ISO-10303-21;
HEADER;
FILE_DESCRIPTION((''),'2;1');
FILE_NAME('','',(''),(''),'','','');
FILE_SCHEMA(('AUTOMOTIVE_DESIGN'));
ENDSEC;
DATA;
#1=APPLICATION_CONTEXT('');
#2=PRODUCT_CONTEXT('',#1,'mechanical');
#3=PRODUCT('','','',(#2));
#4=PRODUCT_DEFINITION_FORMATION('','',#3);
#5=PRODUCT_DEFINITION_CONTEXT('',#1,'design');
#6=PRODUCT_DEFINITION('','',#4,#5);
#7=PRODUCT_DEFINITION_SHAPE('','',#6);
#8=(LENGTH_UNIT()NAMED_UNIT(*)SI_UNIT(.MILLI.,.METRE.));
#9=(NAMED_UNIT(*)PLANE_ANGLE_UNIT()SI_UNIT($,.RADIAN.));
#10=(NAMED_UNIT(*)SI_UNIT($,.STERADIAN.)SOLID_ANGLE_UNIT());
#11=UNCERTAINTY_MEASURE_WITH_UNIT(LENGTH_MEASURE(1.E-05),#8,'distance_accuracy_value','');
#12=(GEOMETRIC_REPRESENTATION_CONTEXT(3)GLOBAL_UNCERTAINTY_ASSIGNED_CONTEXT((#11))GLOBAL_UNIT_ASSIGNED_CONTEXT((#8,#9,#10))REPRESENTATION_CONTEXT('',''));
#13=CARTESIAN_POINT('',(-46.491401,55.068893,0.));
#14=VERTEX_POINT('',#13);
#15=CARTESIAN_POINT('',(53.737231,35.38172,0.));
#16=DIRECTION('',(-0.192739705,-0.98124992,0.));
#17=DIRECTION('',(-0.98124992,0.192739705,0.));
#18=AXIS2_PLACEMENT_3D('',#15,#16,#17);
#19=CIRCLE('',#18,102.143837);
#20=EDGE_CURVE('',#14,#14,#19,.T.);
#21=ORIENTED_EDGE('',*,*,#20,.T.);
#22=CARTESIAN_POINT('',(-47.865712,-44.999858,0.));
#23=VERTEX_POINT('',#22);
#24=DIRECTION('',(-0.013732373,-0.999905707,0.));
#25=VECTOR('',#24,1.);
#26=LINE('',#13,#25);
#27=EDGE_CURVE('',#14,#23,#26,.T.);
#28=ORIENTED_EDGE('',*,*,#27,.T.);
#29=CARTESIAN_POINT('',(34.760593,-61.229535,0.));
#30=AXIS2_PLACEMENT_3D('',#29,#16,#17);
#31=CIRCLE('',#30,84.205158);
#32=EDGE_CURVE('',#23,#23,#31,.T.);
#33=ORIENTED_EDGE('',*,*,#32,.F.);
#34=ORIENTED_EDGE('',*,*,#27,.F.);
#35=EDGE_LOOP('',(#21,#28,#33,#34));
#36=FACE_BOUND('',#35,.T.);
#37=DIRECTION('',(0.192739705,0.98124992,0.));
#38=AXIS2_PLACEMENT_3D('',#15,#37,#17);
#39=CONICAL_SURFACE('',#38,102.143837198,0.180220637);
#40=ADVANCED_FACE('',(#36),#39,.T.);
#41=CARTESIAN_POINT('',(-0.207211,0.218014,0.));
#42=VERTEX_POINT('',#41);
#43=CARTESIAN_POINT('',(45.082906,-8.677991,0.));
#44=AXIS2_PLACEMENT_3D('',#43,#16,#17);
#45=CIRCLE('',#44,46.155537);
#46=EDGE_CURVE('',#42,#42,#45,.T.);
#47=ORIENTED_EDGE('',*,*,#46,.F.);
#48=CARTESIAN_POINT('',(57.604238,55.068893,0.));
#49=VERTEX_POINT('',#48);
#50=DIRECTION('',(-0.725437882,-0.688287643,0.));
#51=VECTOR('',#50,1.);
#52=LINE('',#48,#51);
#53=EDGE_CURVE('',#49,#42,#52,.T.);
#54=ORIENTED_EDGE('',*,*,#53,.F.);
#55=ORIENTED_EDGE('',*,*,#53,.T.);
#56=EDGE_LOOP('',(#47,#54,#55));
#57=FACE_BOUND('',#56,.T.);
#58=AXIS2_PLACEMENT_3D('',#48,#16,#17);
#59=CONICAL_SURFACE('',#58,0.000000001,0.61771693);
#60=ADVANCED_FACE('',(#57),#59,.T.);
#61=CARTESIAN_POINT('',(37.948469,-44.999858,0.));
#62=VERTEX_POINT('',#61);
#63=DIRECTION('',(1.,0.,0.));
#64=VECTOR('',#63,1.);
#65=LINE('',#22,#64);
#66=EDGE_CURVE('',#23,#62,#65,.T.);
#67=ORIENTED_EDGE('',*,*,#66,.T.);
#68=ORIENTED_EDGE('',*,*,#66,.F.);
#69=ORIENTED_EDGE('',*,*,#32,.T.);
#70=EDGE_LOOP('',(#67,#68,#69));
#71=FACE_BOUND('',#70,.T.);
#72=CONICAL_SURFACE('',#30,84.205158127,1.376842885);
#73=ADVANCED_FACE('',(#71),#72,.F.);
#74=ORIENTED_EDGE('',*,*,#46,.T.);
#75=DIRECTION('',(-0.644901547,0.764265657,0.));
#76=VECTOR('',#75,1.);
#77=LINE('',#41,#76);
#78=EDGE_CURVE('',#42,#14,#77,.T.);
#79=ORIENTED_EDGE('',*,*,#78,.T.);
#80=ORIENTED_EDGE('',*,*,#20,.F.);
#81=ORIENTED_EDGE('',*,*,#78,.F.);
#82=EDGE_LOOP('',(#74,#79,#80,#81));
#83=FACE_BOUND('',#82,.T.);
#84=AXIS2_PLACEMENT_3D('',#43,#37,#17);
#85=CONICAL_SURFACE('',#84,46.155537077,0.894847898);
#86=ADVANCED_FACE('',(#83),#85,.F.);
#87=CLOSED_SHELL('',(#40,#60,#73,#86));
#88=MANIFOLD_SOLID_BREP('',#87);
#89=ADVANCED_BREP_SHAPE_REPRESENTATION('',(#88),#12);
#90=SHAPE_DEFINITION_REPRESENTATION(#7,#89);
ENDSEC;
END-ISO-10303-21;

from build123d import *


with BuildPart() as f1:
    # F0 (on Top) → F1 (revolve)
    with BuildSketch(Plane.XY):
        Polygon((-0.20721069, 0.2180140772), (-46.4914007533, 55.0688933581), (-47.8657117786, -44.9998579924), align=None)
        Polygon((37.9484690832, -44.9998579924), (-0.20721069, 0.2180140772), (-47.8657117786, -44.9998579924), align=None)
        Polygon((57.6042379755, 55.0688933581), (-0.20721069, 0.2180140772), (37.9484690832, -44.9998579924), align=None)
    revolve(axis=Axis((47.7763535294, 5.0345176828, 0), (-0.1927397054, -0.9812499202, 0)))


solid = f1.part
